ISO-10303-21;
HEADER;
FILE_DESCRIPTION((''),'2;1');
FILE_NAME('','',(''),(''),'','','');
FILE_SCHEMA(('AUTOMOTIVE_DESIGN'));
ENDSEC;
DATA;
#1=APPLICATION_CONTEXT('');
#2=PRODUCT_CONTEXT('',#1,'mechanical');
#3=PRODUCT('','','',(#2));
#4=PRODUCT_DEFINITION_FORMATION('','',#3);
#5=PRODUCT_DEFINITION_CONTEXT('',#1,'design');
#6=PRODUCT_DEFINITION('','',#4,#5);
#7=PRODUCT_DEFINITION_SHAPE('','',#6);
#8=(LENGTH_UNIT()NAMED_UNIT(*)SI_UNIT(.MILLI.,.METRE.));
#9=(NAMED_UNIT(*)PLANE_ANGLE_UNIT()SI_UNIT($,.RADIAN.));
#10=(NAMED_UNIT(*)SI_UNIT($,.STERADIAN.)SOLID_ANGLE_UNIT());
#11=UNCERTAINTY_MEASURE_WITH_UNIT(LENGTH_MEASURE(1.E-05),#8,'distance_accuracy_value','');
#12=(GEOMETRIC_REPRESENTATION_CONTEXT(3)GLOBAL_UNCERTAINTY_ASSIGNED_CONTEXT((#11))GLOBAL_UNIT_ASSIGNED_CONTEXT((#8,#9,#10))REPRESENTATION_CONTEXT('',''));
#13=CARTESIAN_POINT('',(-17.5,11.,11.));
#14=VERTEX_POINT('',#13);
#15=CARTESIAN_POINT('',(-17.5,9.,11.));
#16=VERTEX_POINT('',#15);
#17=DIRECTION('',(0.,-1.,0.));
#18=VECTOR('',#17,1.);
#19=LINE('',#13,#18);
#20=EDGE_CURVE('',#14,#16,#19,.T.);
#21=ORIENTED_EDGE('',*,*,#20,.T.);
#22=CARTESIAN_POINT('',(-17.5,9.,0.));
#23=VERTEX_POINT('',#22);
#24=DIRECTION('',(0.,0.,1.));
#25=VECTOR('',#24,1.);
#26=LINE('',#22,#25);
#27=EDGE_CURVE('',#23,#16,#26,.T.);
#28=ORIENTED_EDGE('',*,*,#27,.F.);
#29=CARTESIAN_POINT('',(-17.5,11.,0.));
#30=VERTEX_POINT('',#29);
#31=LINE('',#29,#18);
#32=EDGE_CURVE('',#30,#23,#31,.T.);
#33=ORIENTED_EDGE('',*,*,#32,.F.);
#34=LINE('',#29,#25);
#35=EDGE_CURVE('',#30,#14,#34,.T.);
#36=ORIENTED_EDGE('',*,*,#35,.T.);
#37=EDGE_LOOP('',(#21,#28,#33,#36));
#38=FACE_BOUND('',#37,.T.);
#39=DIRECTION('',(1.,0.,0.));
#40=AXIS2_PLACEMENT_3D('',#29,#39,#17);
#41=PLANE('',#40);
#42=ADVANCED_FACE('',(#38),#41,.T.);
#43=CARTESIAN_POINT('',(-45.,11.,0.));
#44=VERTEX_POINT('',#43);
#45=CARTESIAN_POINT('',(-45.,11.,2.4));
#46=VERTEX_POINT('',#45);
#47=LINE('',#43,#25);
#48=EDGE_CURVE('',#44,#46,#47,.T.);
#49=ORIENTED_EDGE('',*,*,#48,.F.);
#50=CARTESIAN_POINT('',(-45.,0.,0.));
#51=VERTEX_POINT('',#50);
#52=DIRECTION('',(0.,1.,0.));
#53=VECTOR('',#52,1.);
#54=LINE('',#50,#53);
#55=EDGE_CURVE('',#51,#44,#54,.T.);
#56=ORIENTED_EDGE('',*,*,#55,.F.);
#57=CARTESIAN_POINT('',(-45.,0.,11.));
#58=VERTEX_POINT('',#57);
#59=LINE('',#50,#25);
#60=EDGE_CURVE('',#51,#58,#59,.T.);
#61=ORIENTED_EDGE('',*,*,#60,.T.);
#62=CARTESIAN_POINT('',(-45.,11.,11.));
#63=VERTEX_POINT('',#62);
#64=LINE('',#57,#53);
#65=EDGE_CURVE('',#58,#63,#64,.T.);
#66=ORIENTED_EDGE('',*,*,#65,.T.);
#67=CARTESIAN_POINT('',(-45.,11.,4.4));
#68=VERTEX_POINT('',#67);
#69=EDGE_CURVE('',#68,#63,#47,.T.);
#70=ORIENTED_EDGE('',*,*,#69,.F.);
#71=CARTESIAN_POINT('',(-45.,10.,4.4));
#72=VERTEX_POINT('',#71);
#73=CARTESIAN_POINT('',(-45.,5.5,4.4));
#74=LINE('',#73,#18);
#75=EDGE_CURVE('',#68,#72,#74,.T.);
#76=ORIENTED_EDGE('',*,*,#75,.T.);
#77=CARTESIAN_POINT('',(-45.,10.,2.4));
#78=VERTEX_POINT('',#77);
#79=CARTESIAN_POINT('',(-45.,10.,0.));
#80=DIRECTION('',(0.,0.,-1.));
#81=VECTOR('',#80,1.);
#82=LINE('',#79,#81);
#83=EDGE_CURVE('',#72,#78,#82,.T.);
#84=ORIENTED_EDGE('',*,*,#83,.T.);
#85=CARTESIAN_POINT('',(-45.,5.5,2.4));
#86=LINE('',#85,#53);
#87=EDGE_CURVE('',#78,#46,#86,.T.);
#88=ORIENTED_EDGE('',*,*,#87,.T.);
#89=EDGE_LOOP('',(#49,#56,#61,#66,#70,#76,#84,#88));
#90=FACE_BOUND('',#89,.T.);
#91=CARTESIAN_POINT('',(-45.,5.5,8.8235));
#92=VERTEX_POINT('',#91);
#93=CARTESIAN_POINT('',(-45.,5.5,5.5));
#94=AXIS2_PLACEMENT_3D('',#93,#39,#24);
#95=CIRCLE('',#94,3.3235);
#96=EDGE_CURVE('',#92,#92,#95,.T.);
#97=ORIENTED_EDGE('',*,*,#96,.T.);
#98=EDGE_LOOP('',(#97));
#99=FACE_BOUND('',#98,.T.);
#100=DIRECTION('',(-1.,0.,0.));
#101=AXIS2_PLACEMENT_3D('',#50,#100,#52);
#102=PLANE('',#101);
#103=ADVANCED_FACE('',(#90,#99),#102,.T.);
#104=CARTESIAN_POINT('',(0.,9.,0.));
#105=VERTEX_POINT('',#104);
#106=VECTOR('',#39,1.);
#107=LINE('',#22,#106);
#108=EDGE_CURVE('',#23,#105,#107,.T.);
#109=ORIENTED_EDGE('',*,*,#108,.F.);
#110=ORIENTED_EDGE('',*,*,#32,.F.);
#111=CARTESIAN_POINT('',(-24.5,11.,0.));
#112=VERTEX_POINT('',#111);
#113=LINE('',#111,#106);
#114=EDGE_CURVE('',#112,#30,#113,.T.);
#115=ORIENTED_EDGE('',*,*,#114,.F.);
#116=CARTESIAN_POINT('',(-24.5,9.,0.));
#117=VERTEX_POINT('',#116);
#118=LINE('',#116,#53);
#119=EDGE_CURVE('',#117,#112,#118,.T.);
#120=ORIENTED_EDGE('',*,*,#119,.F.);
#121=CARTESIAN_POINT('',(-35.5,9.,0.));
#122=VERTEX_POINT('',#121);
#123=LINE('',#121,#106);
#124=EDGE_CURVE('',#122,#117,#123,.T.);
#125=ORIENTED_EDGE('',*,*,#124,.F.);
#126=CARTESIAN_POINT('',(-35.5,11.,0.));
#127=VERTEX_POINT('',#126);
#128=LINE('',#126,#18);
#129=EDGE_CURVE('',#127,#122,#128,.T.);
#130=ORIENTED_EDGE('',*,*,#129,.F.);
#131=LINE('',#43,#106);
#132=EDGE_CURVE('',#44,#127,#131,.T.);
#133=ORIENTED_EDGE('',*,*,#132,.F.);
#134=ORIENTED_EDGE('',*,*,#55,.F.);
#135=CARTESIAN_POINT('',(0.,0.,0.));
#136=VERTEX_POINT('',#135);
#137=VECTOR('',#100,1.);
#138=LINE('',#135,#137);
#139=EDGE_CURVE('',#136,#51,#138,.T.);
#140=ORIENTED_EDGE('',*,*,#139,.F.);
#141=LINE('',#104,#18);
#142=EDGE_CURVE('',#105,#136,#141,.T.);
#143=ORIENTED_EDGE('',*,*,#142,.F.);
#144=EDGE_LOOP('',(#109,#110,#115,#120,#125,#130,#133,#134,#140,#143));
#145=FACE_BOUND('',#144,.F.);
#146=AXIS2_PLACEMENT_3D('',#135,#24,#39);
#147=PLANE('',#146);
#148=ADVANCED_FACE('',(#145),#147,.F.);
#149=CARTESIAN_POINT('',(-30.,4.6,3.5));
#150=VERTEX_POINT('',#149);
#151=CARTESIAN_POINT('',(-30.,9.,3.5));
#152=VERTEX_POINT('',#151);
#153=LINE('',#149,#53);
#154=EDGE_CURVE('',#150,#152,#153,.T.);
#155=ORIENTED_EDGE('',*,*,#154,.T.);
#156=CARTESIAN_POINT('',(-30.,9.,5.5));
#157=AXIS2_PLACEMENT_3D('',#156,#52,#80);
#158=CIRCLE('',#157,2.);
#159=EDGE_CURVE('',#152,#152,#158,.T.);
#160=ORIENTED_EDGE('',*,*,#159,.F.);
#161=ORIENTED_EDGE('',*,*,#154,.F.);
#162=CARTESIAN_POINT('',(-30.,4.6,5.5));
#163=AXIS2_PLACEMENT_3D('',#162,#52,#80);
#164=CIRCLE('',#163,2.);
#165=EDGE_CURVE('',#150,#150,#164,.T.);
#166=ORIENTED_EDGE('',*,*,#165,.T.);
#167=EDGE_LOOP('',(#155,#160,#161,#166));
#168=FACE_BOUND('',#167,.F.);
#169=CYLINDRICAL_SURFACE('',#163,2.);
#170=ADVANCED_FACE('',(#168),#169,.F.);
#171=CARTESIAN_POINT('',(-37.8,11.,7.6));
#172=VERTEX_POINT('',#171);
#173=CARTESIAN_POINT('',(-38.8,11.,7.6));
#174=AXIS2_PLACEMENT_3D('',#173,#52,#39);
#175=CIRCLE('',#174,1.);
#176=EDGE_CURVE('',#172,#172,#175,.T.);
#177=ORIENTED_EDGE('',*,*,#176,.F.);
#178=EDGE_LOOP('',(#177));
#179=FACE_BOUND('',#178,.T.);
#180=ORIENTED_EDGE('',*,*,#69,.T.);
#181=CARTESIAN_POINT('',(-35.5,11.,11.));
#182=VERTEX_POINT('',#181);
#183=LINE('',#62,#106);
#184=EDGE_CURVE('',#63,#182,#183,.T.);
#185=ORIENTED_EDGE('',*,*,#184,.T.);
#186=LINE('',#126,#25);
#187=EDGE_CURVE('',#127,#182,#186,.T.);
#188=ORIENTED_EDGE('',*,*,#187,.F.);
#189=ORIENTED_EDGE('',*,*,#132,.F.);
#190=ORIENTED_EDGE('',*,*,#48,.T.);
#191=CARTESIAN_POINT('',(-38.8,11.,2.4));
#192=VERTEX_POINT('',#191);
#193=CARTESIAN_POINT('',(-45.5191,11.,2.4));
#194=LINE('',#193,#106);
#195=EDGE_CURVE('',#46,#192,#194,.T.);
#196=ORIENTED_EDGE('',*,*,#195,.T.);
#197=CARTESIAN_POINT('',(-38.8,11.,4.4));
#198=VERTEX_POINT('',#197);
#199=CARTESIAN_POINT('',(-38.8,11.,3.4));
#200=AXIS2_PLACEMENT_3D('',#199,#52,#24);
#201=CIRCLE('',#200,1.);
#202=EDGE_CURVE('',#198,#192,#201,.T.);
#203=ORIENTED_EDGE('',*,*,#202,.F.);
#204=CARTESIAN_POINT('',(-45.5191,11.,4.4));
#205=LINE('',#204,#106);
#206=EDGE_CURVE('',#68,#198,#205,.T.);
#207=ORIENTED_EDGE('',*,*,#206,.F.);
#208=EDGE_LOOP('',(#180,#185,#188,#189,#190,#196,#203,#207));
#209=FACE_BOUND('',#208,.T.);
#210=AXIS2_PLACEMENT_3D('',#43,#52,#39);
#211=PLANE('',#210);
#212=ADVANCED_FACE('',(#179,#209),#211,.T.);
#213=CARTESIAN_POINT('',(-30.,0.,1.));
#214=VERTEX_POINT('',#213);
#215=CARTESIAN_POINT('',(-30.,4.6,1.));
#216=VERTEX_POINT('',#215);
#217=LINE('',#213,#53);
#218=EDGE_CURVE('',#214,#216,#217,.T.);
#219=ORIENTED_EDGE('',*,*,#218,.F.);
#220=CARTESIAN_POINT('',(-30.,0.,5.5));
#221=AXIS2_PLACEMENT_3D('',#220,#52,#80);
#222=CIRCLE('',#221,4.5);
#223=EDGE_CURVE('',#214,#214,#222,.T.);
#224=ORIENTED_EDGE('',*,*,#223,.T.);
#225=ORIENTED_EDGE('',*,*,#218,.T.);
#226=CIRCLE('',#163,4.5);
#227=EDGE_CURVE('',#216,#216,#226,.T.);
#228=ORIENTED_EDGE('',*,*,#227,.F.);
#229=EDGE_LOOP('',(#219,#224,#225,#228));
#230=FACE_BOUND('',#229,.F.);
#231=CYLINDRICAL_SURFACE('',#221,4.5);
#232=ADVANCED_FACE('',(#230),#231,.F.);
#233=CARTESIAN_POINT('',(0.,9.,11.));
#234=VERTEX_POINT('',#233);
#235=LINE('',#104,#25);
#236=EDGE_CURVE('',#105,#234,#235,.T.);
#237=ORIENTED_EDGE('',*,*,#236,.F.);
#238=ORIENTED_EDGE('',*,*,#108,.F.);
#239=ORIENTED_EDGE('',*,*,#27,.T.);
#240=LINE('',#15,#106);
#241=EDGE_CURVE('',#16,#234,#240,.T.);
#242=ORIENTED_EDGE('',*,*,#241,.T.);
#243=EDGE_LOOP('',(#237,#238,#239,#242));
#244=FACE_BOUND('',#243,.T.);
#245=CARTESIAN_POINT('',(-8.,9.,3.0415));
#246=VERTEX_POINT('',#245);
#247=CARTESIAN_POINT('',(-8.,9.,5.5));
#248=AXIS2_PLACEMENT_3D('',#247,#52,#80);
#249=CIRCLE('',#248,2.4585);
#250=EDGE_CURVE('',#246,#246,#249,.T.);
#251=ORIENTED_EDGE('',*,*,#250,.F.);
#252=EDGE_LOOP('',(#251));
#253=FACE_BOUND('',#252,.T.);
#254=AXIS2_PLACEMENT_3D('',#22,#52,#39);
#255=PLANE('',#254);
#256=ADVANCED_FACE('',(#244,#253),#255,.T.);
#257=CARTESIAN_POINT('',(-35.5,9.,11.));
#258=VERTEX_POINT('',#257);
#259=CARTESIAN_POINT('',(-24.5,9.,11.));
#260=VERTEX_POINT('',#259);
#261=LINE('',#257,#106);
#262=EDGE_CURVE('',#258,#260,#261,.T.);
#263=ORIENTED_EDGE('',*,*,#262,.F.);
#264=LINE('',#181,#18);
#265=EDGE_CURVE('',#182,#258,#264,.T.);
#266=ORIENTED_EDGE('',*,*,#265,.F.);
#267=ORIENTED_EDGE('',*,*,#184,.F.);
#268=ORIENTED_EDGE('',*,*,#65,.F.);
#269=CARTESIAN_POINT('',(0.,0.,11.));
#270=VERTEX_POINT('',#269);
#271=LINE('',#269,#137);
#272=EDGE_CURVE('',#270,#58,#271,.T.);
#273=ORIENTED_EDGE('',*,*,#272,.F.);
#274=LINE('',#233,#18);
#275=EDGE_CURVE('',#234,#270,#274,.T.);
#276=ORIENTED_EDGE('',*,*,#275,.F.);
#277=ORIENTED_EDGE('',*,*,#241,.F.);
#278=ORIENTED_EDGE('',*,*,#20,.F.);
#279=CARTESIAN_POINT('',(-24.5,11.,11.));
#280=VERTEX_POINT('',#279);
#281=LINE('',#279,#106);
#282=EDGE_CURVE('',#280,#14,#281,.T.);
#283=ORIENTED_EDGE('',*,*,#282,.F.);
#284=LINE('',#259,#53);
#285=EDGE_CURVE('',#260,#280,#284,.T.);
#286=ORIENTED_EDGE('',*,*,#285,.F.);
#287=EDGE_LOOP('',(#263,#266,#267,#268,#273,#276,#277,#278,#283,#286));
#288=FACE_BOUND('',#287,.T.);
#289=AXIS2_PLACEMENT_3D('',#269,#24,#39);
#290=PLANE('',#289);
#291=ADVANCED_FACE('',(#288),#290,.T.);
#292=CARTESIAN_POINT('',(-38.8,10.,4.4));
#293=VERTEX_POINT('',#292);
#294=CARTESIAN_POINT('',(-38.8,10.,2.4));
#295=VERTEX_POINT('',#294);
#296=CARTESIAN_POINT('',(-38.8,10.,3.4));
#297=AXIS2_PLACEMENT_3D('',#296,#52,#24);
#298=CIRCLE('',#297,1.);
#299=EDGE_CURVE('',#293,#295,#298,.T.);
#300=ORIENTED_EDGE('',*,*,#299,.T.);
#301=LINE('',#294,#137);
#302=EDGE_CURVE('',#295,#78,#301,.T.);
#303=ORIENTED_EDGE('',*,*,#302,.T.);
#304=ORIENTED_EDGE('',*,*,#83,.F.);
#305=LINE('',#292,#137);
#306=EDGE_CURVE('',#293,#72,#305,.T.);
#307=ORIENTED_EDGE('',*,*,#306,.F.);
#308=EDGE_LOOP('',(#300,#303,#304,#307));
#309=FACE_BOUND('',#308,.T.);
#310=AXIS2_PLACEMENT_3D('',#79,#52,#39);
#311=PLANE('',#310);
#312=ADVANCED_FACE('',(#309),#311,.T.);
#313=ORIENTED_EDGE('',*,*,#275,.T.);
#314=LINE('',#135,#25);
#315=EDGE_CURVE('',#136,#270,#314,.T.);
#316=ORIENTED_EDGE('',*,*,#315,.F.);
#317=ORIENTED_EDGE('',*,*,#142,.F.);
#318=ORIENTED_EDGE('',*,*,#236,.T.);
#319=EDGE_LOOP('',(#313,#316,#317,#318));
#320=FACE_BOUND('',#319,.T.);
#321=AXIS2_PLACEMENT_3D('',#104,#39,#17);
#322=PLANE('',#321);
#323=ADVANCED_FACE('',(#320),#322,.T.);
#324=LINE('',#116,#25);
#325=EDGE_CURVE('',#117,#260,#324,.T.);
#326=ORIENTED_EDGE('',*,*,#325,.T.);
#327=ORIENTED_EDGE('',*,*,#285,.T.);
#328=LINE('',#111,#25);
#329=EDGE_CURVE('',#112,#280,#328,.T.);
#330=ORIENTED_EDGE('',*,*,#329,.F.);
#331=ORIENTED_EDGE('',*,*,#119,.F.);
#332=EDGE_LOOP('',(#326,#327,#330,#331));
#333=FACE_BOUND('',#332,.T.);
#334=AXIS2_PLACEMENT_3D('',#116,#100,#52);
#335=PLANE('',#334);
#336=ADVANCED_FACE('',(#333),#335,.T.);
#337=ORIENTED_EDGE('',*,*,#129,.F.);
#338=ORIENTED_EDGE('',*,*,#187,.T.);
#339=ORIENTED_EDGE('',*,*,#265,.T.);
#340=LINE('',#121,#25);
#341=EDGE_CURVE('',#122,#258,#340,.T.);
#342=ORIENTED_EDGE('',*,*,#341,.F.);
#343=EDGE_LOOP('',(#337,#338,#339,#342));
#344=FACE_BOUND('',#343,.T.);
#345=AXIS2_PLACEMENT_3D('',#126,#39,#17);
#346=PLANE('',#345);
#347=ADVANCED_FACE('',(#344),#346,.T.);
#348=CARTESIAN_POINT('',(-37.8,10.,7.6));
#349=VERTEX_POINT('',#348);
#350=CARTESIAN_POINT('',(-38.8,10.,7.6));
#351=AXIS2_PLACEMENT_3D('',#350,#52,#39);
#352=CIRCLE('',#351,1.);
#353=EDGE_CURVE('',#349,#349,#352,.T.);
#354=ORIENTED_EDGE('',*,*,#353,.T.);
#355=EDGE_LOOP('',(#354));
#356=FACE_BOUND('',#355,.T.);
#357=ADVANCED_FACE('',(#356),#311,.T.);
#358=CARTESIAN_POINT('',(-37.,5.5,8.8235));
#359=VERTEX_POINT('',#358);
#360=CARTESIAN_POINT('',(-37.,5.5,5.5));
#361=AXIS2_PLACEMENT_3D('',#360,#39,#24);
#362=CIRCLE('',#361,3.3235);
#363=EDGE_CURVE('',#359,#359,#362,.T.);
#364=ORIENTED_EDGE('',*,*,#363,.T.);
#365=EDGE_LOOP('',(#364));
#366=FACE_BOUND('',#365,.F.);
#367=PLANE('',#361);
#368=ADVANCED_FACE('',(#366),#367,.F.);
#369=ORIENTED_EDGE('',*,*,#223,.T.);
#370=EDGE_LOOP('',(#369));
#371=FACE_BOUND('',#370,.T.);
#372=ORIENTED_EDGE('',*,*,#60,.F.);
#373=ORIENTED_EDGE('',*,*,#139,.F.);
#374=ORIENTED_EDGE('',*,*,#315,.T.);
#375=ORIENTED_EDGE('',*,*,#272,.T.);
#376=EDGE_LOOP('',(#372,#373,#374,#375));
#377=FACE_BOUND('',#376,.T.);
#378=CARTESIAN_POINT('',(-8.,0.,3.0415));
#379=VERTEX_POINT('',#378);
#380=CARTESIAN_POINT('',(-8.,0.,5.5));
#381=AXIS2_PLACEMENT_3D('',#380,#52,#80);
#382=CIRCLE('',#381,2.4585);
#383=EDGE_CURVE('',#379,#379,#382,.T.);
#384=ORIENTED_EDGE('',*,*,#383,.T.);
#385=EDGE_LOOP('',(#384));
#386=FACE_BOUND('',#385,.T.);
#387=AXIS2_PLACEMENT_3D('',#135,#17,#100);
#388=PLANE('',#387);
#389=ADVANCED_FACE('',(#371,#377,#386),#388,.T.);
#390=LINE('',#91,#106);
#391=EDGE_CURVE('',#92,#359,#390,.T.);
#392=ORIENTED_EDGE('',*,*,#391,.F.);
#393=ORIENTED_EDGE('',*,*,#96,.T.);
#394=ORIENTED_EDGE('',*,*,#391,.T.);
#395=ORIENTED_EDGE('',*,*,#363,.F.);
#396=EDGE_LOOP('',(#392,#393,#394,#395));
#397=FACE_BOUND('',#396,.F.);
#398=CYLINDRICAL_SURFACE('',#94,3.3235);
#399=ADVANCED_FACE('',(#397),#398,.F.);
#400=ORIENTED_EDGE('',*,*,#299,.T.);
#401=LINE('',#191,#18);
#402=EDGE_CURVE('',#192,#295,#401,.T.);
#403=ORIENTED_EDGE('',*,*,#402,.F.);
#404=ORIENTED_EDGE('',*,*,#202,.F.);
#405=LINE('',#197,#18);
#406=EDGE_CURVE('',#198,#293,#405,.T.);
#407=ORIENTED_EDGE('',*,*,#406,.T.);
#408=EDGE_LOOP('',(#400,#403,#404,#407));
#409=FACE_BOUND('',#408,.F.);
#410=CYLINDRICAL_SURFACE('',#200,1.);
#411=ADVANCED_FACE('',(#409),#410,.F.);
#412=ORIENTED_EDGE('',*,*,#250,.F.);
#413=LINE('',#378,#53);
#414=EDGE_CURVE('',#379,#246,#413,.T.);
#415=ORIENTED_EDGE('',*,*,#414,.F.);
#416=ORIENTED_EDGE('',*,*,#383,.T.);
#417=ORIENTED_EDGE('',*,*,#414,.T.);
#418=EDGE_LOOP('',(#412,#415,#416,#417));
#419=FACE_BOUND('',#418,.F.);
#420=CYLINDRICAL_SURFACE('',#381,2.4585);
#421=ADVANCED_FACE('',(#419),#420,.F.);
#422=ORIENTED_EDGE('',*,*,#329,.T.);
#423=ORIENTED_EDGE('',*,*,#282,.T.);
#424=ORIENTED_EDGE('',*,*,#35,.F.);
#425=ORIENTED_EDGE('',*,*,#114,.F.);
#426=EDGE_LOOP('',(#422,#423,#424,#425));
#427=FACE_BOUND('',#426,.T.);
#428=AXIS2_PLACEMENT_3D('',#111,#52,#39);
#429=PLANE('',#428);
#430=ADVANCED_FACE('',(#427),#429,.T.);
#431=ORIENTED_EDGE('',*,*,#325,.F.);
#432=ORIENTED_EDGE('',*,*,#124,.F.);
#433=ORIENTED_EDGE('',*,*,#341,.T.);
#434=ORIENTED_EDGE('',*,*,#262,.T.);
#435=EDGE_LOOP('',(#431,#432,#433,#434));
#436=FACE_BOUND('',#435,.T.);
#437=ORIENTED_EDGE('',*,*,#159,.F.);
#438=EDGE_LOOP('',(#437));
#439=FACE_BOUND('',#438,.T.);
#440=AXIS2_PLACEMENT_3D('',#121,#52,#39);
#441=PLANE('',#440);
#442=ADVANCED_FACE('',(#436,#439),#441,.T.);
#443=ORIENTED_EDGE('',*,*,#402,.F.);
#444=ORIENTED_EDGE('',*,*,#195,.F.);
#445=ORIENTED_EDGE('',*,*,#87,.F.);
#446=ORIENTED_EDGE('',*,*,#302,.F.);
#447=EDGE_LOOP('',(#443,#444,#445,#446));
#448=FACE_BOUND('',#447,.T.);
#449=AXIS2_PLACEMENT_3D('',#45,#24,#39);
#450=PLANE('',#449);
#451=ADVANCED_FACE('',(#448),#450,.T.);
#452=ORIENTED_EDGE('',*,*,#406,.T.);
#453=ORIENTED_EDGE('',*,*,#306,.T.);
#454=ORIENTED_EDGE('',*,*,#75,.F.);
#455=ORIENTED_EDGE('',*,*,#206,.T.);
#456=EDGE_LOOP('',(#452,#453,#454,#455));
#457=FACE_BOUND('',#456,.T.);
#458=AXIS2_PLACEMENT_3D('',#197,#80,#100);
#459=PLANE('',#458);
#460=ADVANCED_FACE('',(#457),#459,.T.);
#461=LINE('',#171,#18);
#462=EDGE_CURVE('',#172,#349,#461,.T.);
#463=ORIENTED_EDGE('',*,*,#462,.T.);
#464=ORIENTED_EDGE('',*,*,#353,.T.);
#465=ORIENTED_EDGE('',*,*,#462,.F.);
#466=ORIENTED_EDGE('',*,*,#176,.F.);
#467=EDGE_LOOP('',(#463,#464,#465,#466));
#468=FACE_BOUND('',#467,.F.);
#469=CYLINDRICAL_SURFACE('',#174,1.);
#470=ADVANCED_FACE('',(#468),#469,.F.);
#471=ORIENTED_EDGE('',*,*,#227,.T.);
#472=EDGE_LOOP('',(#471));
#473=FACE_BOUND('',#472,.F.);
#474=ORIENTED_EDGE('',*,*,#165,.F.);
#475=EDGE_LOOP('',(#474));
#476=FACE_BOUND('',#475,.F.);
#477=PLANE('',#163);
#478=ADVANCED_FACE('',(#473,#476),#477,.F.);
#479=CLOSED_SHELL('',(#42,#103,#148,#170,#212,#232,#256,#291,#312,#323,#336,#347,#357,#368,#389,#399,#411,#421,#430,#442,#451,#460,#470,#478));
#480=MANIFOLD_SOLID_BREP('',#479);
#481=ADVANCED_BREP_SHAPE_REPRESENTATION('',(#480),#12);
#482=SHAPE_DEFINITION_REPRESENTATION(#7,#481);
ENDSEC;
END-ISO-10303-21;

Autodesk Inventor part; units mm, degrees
ref_plane "YZ Plane" through (0, 0, 0) normal (1, 0, 0) x (0, 1, 0)
ref_plane "XZ Plane" through (0, 0, 0) normal (0, 1, 0) x (-1, 0, 0)
ref_plane "XY Plane" through (0, 0, 0) normal (0, 0, 1) x (1, 0, 0)
sketch "Boceto1" plane through (0, 0, 0) normal (0, 0, 1) x (1, 0, 0)
  line L0 (0, 0) -> (-45, 0)
  line L1 (-45, 0) -> (-45, 11)
  line L2 (0, 9) -> (0, 0)
  line L3 (-35.5, 11) -> (-35.5, 9)
  line L4 (-35.5, 9) -> (-24.5, 9)
  line L5 (-24.5, 9) -> (-24.5, 11)
  line L6 (-17.5, 11) -> (-17.5, 9)
  line L7 (-17.5, 9) -> (0, 9)
  line L8 (-45, 11) -> (-35.5, 11)
  line L9 (-24.5, 11) -> (-17.5, 11)
  dimension "d0" = 9
  dimension "d1" = 11
  dimension "d2" = 9.5
  dimension "d3" = 7
  dimension "d4" = 17.5
  dimension "d5" = 11
  dimension "d6" = 2
  dimension "d7" = 2
extrude "Extrusión1" add sketch "Boceto1" along normal blind 11
sketch "Boceto2" plane through (-45, 0, 0) normal (0, -1, 0) x (1, 0, 0)
  line L0 (0, 0) -> (45, 0) projected
  line L1 (45, 0) -> (45, 11) projected
  line L2 (0, 11) -> (45, 11) projected
  line L3 (0, 0) -> (0, 11) projected
  line L4 (45, 5.5) -> (0, 5.5) construction
  line L5 (45, 11) -> (27.5, 11) projected
  line L6 (37, 11) -> (37, 0) construction
  line L7 (15, 11) -> (15, 0) construction
  line L8 (0, 0) -> (45, 0) projected
  circle A0 centre (37, 5.5) radius 2.85
  circle A1 centre (15, 5.5) radius 4.5
  circle A2 centre (15, 5.5) radius 2
  dimension "d10" = 8
  dimension "d11" = 22
  dimension "d12" = 9
  dimension "d13" = 4
  dimension "d14" = 5.7
hole "Agujero1" at (-8, 0, 5.5) direction (0, 1, 0) diameter 4.917 end through all thread size "M6x1" class "6H" standard "ANSI Metric M Profile"
hole "Agujero2" at (-30, 0, 5.5) direction (0, 1, 0) diameter 4 end through all counterbore diameter 9 counterbore depth 4.6
sketch "Boceto3" plane through (-45, 11, 0) normal (0, 1, 0) x (1, 0, 0)
  line L0 (9.5, 0) -> (0, 0) projected
  line L1 (0, 0) -> (0, -11) projected
  line L2 (9.5, -11) -> (0, -11) projected
  line L3 (9.5, 0) -> (9.5, -11) projected
  line L4 (6.2, -3.4) -> (-0.5191, -3.4) construction
  line L5 (6.2, -4.4) -> (-0.5191, -4.4)
  line L6 (-0.5191, -2.4) -> (6.2, -2.4)
  arc A0 (6.2, -4.4) -> (6.2, -2.4) centre (6.2, -3.4) ccw
  arc A1 (-0.5191, -2.4) -> (-0.5191, -4.4) centre (-0.5191, -3.4) ccw
  line L7 (9.5, -5.5) -> (0, -5.5) construction
  circle A2 centre (6.2, -7.6) radius 1
  point P0 (45, 0)
  point P1 (2.8405, -3.4)
  dimension "d29" = 2.1
  dimension "d30" = 2
  dimension "d31" = 6.2
  dimension "d32" = 2.1
  dimension "d33" = 2
  dimension "d34" = 6.2
extrude "Extrusión2" cut sketch "Boceto3" against normal blind 1 contours L6 A0 L5 L1 | L1 L5 A1 L6 | A2
sketch "Boceto4" plane through (-45, 0, 0) normal (-1, 0, 0) x (0, 0, 1)
  line L0 (4.4, 11) -> (4.4, 10) projected
  line L1 (4.4, 10) -> (2.4, 10) projected
  line L2 (2.4, 10) -> (2.4, 11) projected
  line L3 (0, 11) -> (2.4, 11) projected
  line L4 (0, 11) -> (0, 0) projected
  line L5 (0, 0) -> (11, 0) projected
  line L6 (11, 11) -> (11, 0) projected
  line L7 (4.4, 11) -> (11, 11) projected
  line L8 (11, 5.5) -> (0, 5.5) construction
  line L9 (0, 11) -> (0, 0) projected
  line L10 (5.5, 0) -> (5.5, 11) construction
  point P0 (5.5, 5.5)
hole "Agujero3" at (-45, 5.5, 5.5) direction (1, 0, 0) diameter 6.647 depth 8 thread size "M8x1.25" class "6H" standard "ANSI Metric M Profile"
properties part number "Hudson 1-55"
